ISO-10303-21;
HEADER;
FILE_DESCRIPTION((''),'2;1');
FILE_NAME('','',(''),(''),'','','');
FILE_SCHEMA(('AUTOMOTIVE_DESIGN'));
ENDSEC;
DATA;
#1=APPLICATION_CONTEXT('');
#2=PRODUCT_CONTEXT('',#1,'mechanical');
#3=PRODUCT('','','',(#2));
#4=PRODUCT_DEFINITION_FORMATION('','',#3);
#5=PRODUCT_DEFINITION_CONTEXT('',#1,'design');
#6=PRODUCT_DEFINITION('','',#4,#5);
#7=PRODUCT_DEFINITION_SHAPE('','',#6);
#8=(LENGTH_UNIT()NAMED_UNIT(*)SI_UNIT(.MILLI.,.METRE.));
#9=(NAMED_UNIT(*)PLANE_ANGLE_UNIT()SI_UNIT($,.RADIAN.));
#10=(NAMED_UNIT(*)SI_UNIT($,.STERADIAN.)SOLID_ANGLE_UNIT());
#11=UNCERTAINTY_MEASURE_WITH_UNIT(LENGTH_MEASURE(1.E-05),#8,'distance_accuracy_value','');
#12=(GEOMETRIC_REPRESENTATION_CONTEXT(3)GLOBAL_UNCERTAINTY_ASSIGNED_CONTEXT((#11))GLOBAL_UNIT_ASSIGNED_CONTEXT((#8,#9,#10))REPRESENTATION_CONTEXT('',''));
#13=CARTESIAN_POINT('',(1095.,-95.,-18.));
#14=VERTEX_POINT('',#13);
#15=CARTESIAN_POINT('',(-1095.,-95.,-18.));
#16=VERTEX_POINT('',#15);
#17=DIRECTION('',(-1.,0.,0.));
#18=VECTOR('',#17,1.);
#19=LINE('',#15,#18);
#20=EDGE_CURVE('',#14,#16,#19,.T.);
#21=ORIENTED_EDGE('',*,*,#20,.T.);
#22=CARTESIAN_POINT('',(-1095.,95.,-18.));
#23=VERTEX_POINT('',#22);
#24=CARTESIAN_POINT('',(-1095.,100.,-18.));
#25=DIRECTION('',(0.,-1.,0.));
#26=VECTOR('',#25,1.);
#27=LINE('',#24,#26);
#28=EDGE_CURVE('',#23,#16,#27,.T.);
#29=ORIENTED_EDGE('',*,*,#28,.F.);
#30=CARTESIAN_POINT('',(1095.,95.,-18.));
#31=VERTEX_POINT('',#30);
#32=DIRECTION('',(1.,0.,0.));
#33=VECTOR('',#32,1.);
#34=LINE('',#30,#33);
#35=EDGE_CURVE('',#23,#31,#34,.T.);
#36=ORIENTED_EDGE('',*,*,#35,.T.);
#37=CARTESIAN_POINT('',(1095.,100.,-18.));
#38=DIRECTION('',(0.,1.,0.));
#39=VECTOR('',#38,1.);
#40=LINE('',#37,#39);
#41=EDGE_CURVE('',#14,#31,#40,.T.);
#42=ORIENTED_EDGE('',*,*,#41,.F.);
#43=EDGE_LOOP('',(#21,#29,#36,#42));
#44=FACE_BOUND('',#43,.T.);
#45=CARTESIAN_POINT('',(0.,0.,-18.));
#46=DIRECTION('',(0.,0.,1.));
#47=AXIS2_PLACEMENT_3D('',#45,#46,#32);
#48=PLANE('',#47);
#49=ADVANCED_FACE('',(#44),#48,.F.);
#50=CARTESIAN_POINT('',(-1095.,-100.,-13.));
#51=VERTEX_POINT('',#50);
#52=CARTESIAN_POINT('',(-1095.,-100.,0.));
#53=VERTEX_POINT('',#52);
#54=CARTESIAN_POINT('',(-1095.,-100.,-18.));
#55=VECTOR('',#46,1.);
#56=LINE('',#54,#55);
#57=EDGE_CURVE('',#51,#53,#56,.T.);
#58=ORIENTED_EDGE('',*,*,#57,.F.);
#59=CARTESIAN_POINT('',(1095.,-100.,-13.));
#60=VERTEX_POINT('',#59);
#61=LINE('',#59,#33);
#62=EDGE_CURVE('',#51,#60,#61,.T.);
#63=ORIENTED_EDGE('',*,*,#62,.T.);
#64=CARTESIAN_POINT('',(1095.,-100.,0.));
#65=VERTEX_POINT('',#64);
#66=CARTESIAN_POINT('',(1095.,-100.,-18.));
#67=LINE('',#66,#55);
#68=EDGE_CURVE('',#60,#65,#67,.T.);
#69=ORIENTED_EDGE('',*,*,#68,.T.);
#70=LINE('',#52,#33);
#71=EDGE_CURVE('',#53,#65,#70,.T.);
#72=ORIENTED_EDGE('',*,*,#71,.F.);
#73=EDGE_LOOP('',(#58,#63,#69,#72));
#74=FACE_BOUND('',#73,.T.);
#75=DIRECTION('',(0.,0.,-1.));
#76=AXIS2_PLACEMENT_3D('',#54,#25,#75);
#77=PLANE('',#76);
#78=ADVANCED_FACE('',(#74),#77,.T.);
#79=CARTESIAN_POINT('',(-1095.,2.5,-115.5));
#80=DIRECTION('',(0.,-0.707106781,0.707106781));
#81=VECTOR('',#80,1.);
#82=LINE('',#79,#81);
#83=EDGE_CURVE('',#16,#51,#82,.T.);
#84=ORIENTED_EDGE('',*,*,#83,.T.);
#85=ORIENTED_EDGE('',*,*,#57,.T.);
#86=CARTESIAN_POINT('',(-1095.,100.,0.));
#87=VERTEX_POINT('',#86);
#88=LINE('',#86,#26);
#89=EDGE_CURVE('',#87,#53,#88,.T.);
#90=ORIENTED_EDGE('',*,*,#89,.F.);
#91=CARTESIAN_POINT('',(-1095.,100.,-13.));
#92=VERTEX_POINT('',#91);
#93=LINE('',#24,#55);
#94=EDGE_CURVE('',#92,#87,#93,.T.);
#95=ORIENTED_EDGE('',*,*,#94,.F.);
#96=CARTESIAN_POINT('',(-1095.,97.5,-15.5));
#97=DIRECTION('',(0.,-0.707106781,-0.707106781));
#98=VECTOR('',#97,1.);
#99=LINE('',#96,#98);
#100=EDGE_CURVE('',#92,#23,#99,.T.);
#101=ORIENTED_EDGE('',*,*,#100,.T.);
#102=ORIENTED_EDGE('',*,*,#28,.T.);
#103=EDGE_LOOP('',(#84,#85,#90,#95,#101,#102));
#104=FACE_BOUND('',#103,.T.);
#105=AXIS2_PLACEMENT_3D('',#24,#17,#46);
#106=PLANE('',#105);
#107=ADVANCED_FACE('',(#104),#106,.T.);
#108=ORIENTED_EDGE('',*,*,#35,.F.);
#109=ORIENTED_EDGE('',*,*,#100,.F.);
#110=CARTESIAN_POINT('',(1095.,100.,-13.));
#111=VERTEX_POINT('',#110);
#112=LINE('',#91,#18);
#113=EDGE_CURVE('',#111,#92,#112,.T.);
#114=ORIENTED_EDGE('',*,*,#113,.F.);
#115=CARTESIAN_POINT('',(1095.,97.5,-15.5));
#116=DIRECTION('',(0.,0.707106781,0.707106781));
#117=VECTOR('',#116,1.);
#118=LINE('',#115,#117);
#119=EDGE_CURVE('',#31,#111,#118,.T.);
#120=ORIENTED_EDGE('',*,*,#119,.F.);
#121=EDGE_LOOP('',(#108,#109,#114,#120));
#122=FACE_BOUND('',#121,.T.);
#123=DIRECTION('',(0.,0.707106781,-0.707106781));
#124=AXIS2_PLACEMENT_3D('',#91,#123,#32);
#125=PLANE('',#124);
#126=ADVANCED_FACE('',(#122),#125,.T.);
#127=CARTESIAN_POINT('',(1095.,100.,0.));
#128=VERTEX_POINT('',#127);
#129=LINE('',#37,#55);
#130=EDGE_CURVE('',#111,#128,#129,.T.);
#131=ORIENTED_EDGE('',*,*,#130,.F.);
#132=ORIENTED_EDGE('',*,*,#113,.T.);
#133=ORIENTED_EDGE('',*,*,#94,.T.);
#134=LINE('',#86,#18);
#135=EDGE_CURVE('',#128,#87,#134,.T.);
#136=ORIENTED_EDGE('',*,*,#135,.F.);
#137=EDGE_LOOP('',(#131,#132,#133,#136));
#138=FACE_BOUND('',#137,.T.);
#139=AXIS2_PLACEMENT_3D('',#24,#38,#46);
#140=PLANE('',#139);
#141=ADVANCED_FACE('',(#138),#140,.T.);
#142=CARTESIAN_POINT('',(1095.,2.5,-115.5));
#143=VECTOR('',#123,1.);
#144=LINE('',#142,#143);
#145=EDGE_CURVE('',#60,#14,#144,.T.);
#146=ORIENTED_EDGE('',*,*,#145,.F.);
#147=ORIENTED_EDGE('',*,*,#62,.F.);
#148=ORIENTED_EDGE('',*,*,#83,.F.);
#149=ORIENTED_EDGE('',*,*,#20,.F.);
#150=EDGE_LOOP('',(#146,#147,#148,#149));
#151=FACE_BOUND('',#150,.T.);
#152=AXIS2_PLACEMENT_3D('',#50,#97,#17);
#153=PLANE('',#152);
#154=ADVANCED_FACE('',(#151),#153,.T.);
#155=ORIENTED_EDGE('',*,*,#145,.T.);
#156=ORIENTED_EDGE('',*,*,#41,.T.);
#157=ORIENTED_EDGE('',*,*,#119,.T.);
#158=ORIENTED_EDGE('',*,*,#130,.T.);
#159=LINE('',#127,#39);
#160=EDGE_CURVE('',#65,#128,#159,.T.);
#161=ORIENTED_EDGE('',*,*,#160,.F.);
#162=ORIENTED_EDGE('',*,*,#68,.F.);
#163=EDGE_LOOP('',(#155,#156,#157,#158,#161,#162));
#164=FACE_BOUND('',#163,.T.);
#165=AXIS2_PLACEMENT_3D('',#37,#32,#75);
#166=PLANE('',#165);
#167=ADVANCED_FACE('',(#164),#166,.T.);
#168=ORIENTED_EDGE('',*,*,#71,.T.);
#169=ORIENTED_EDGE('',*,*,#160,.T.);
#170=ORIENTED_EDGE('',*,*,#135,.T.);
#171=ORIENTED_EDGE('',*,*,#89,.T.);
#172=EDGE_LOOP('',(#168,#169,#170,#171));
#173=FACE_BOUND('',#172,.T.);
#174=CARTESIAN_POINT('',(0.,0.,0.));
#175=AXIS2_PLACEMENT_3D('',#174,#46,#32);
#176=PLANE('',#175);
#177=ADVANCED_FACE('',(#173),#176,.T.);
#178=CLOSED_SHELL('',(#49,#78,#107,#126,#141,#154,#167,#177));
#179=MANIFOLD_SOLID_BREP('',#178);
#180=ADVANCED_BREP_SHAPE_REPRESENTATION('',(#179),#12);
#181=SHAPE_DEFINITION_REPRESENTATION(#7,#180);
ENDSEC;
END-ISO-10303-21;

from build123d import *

# Parameters (mm, degrees)
SKETCH_1_W             = 2190
SKETCH_1_H             = 200
SM_BASE_FLANGE_1_DEPTH = 18
CHAMFER_1_SIZE         = 5


# Sheet-metal steps are written as plain solids
with BuildPart() as part:
    # Sketch 1 → 基体-法兰1 (new body)
    with BuildSketch(Plane.XY):
        Rectangle(SKETCH_1_W, SKETCH_1_H)
    extrude(amount=-SM_BASE_FLANGE_1_DEPTH)

    # 倒角1
    chamfer_1_edges = [part.edges().sort_by_distance(p)[0] for p in [
        (0, -100, -18),
        (0, 100, -18),
    ]]
    chamfer(chamfer_1_edges, length=CHAMFER_1_SIZE)


solid = part.part
